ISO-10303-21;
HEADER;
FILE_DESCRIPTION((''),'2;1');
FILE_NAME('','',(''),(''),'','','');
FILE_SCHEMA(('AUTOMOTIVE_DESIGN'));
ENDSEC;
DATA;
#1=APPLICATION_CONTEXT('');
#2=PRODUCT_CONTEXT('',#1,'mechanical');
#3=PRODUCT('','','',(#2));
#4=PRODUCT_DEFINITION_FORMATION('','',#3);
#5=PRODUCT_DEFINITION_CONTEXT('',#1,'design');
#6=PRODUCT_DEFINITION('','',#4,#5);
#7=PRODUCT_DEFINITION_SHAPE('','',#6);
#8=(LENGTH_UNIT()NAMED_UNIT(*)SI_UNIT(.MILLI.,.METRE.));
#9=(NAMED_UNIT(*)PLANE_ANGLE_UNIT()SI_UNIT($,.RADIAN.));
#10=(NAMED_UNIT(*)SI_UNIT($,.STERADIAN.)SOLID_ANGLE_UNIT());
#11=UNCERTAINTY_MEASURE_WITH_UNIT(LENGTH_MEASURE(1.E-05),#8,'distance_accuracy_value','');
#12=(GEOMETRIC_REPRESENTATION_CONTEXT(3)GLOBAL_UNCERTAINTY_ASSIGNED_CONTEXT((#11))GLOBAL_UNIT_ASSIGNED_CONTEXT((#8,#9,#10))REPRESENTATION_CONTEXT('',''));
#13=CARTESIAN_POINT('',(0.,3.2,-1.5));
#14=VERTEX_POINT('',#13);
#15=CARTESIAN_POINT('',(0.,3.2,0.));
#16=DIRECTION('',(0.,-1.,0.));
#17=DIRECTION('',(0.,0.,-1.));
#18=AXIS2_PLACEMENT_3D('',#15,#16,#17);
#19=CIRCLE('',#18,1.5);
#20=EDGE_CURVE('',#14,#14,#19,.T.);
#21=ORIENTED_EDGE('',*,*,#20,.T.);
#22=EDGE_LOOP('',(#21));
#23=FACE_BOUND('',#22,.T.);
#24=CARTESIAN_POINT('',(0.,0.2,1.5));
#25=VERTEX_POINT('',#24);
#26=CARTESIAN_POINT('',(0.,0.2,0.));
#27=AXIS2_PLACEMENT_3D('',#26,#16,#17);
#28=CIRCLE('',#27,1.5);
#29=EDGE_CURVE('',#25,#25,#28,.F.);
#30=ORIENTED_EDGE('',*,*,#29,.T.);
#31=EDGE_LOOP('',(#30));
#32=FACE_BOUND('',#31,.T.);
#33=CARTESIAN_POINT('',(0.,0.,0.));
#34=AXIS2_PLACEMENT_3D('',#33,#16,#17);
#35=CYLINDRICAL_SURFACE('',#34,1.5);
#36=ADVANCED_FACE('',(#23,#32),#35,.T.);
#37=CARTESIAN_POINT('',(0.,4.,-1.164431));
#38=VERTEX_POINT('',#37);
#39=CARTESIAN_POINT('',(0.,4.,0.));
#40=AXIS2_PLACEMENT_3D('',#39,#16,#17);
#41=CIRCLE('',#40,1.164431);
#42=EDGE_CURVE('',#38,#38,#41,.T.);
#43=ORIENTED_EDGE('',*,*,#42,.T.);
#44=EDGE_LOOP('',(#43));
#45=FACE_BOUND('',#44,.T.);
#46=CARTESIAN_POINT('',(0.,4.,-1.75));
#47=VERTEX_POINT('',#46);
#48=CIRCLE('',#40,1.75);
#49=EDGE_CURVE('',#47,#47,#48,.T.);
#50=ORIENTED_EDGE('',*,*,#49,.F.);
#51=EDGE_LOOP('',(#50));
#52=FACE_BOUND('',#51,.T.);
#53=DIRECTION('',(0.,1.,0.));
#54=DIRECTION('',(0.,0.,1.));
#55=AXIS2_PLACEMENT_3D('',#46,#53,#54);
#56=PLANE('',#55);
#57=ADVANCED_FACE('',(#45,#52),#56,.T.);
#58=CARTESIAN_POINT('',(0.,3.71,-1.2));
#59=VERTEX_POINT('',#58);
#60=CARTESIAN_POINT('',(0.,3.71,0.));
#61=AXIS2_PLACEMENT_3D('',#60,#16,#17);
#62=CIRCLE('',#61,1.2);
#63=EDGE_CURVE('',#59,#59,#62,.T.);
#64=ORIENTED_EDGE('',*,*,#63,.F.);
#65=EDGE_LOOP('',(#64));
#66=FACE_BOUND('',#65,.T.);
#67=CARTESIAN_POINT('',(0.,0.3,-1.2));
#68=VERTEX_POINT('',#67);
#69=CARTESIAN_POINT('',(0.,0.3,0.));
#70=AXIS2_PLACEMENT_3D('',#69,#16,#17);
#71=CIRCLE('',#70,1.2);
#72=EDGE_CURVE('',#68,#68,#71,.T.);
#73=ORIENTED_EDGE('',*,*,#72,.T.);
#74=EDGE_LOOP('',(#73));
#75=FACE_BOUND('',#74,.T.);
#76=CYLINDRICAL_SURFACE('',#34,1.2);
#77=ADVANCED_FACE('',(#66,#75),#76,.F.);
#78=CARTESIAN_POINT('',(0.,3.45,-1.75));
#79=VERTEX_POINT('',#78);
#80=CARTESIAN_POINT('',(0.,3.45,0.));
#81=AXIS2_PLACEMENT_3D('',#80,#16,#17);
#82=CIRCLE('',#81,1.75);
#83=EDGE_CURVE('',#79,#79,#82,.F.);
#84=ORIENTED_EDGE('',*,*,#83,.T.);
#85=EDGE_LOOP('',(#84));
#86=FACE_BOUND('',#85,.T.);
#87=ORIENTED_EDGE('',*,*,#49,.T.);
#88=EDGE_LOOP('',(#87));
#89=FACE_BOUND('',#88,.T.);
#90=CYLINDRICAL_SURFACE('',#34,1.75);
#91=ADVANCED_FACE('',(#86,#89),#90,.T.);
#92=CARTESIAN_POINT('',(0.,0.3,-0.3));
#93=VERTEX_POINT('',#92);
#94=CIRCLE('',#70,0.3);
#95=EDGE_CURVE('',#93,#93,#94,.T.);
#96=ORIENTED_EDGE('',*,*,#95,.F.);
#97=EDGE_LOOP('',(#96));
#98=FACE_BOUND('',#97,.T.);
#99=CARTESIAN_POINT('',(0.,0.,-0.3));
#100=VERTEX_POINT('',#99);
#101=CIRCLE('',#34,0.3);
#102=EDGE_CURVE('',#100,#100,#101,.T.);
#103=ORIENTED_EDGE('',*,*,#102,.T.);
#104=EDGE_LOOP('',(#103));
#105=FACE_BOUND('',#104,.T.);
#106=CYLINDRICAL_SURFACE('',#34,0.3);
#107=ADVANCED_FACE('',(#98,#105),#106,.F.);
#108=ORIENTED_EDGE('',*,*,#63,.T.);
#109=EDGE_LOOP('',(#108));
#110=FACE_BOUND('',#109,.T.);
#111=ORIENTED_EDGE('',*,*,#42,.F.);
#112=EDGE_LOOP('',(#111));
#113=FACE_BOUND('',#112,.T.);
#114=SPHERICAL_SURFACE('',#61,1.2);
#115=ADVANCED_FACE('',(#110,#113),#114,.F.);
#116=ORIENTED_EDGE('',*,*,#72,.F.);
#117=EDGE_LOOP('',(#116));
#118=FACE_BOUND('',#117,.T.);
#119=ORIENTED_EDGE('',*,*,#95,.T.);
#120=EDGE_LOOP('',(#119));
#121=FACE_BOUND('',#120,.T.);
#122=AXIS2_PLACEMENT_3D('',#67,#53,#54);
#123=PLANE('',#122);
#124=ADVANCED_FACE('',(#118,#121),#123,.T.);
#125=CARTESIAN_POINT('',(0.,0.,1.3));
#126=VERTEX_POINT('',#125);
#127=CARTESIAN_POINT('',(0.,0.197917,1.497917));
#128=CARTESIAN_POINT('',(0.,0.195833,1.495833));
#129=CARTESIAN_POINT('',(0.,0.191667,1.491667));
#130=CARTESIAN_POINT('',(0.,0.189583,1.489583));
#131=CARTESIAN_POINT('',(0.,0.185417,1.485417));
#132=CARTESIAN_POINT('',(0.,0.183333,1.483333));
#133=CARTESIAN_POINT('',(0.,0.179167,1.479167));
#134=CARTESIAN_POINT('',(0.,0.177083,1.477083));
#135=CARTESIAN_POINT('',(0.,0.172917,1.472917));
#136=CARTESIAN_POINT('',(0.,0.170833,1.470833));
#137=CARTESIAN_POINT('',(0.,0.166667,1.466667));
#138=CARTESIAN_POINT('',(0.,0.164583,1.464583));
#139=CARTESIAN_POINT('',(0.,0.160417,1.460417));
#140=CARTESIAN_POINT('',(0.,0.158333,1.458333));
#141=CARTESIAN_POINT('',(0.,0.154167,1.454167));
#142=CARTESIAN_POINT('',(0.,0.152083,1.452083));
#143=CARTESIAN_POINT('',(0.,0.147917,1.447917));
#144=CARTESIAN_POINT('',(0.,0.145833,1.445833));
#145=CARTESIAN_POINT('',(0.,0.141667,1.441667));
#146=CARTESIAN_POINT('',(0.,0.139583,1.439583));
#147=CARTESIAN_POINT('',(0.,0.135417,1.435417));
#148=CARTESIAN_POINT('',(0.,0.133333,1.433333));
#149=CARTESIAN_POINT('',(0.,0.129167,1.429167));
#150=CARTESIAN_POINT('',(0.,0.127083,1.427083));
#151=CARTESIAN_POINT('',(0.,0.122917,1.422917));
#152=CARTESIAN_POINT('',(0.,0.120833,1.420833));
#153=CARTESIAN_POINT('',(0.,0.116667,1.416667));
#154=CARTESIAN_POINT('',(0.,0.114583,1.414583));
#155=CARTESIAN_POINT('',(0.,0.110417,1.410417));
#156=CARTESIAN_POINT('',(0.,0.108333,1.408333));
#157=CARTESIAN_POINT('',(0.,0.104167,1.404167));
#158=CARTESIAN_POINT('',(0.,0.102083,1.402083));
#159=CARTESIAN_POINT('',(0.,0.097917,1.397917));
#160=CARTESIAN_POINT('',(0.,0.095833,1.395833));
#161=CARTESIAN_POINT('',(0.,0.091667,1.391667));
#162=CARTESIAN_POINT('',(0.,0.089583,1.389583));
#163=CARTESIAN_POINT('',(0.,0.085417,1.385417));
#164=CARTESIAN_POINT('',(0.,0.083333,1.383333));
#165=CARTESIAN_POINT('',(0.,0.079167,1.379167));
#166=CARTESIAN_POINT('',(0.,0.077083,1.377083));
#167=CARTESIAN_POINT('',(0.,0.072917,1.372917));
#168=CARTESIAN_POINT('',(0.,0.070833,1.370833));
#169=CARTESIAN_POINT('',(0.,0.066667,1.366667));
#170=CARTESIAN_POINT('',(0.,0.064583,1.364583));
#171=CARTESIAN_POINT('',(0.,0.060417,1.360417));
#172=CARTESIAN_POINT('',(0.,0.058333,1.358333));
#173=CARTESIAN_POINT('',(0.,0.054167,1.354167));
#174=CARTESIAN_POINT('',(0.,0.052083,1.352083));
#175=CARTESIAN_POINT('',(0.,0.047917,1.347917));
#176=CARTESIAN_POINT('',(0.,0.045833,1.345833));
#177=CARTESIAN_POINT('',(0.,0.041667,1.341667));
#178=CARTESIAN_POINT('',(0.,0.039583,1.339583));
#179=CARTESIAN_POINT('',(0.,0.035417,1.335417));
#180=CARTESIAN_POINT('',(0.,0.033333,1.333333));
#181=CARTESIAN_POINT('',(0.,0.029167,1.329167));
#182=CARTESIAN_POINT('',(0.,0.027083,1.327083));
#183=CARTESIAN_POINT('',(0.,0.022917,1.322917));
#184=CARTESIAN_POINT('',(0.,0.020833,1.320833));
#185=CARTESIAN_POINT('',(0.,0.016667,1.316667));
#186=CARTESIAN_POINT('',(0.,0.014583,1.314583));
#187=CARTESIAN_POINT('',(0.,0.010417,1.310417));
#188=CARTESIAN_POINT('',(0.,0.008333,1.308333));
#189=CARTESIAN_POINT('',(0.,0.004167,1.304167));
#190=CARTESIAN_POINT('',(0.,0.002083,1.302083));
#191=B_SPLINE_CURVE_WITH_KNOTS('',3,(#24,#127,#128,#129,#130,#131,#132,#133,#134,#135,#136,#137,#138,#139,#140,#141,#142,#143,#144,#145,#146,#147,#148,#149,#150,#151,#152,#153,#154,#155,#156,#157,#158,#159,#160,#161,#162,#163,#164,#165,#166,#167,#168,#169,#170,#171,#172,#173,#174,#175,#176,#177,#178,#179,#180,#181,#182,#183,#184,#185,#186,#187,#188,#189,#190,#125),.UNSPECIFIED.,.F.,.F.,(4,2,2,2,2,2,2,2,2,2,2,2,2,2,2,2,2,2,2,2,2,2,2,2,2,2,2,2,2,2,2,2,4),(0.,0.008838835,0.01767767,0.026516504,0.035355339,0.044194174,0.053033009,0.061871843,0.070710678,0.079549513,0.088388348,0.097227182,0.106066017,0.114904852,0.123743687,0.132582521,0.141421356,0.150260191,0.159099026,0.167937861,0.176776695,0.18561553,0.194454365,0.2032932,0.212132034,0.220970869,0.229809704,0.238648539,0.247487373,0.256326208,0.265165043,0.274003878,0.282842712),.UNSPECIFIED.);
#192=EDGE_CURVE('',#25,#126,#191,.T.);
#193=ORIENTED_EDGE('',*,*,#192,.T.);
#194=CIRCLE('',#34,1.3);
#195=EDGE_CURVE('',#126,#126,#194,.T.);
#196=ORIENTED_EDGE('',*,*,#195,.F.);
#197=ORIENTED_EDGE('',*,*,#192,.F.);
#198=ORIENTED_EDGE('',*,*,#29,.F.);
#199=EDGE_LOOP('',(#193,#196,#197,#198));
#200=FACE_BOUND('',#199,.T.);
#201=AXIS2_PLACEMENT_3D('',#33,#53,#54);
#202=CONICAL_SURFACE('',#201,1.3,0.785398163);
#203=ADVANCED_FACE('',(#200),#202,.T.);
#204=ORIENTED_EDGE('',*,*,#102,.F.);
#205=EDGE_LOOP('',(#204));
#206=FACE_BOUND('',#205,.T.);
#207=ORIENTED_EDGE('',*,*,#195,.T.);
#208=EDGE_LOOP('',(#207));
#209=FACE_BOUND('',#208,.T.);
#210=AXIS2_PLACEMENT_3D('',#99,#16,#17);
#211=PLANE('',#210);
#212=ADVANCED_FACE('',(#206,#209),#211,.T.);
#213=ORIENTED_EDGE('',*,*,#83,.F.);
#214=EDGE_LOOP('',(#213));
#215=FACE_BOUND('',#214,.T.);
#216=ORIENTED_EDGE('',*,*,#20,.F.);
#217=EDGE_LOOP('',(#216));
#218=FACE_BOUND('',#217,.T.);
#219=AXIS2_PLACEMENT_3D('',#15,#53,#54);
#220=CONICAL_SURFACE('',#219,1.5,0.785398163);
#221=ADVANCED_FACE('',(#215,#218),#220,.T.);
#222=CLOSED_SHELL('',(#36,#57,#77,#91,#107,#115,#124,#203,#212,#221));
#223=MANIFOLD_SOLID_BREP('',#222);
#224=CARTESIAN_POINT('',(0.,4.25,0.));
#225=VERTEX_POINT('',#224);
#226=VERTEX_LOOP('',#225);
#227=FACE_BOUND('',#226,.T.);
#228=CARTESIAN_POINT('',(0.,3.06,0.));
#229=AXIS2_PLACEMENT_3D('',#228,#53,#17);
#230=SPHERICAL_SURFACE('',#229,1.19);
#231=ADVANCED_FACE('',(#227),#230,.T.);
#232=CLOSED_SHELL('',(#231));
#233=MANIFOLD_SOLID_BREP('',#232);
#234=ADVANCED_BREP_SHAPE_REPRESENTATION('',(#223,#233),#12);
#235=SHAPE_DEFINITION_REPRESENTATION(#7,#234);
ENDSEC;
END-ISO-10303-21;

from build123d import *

# Parameters (mm, degrees)
CHAMFER_1_SIZE = 0.2
CHAMFER_2_SIZE = 0.25


with BuildPart() as part:
    # 草图1 → 旋转1 (revolve)
    with BuildSketch(Plane(origin=(0, 0, 0), x_dir=(0, 0, -1), z_dir=(1, 0, 0))):
        with BuildLine():
            Line((0.3, 0), (1.5, 0))
            Line((1.5, 0), (1.5, 3.2))
            Line((1.5, 3.2), (1.75, 3.2))
            Line((1.75, 3.2), (1.75, 4))
            Line((1.75, 4), (1.164431192, 4))
            ThreePointArc((1.164431192, 4), (1.191074605, 3.856086567), (1.2, 3.71))
            Line((1.2, 3.71), (1.2, 0.3))
            Line((1.2, 0.3), (0.3, 0.3))
            Line((0.3, 0.3), (0.3, 0))
        make_face()
    revolve(axis=Axis((0, 0, 0), (0, 1, 0)))

    # 倒角1
    chamfer_1_edges = [part.edges().sort_by_distance(p)[0] for p in [
        (0, 0, 1.5),
    ]]
    chamfer(chamfer_1_edges, length=CHAMFER_1_SIZE)

    # 倒角2
    chamfer_2_edges = [part.edges().sort_by_distance(p)[0] for p in [
        (0, 3.2, 1.75),
    ]]
    chamfer(chamfer_2_edges, length=CHAMFER_2_SIZE - 0.0001)  # a hair under: the kernel refuses the full size


with BuildPart() as body_2:
    # 草图2 → 旋转2 (revolve)
    with BuildSketch(Plane(origin=(0, 0, 0), x_dir=(0, 0, -1), z_dir=(1, 0, 0))):
        with BuildLine():
            Line((0, 4.25), (0, 1.87))
            ThreePointArc((0, 1.87), (1.19, 3.06), (0, 4.25))
        make_face()
    revolve(axis=Axis((0, 5.532857048, 0), (0, -1, 0)))


solid = Compound([part.part, body_2.part])
